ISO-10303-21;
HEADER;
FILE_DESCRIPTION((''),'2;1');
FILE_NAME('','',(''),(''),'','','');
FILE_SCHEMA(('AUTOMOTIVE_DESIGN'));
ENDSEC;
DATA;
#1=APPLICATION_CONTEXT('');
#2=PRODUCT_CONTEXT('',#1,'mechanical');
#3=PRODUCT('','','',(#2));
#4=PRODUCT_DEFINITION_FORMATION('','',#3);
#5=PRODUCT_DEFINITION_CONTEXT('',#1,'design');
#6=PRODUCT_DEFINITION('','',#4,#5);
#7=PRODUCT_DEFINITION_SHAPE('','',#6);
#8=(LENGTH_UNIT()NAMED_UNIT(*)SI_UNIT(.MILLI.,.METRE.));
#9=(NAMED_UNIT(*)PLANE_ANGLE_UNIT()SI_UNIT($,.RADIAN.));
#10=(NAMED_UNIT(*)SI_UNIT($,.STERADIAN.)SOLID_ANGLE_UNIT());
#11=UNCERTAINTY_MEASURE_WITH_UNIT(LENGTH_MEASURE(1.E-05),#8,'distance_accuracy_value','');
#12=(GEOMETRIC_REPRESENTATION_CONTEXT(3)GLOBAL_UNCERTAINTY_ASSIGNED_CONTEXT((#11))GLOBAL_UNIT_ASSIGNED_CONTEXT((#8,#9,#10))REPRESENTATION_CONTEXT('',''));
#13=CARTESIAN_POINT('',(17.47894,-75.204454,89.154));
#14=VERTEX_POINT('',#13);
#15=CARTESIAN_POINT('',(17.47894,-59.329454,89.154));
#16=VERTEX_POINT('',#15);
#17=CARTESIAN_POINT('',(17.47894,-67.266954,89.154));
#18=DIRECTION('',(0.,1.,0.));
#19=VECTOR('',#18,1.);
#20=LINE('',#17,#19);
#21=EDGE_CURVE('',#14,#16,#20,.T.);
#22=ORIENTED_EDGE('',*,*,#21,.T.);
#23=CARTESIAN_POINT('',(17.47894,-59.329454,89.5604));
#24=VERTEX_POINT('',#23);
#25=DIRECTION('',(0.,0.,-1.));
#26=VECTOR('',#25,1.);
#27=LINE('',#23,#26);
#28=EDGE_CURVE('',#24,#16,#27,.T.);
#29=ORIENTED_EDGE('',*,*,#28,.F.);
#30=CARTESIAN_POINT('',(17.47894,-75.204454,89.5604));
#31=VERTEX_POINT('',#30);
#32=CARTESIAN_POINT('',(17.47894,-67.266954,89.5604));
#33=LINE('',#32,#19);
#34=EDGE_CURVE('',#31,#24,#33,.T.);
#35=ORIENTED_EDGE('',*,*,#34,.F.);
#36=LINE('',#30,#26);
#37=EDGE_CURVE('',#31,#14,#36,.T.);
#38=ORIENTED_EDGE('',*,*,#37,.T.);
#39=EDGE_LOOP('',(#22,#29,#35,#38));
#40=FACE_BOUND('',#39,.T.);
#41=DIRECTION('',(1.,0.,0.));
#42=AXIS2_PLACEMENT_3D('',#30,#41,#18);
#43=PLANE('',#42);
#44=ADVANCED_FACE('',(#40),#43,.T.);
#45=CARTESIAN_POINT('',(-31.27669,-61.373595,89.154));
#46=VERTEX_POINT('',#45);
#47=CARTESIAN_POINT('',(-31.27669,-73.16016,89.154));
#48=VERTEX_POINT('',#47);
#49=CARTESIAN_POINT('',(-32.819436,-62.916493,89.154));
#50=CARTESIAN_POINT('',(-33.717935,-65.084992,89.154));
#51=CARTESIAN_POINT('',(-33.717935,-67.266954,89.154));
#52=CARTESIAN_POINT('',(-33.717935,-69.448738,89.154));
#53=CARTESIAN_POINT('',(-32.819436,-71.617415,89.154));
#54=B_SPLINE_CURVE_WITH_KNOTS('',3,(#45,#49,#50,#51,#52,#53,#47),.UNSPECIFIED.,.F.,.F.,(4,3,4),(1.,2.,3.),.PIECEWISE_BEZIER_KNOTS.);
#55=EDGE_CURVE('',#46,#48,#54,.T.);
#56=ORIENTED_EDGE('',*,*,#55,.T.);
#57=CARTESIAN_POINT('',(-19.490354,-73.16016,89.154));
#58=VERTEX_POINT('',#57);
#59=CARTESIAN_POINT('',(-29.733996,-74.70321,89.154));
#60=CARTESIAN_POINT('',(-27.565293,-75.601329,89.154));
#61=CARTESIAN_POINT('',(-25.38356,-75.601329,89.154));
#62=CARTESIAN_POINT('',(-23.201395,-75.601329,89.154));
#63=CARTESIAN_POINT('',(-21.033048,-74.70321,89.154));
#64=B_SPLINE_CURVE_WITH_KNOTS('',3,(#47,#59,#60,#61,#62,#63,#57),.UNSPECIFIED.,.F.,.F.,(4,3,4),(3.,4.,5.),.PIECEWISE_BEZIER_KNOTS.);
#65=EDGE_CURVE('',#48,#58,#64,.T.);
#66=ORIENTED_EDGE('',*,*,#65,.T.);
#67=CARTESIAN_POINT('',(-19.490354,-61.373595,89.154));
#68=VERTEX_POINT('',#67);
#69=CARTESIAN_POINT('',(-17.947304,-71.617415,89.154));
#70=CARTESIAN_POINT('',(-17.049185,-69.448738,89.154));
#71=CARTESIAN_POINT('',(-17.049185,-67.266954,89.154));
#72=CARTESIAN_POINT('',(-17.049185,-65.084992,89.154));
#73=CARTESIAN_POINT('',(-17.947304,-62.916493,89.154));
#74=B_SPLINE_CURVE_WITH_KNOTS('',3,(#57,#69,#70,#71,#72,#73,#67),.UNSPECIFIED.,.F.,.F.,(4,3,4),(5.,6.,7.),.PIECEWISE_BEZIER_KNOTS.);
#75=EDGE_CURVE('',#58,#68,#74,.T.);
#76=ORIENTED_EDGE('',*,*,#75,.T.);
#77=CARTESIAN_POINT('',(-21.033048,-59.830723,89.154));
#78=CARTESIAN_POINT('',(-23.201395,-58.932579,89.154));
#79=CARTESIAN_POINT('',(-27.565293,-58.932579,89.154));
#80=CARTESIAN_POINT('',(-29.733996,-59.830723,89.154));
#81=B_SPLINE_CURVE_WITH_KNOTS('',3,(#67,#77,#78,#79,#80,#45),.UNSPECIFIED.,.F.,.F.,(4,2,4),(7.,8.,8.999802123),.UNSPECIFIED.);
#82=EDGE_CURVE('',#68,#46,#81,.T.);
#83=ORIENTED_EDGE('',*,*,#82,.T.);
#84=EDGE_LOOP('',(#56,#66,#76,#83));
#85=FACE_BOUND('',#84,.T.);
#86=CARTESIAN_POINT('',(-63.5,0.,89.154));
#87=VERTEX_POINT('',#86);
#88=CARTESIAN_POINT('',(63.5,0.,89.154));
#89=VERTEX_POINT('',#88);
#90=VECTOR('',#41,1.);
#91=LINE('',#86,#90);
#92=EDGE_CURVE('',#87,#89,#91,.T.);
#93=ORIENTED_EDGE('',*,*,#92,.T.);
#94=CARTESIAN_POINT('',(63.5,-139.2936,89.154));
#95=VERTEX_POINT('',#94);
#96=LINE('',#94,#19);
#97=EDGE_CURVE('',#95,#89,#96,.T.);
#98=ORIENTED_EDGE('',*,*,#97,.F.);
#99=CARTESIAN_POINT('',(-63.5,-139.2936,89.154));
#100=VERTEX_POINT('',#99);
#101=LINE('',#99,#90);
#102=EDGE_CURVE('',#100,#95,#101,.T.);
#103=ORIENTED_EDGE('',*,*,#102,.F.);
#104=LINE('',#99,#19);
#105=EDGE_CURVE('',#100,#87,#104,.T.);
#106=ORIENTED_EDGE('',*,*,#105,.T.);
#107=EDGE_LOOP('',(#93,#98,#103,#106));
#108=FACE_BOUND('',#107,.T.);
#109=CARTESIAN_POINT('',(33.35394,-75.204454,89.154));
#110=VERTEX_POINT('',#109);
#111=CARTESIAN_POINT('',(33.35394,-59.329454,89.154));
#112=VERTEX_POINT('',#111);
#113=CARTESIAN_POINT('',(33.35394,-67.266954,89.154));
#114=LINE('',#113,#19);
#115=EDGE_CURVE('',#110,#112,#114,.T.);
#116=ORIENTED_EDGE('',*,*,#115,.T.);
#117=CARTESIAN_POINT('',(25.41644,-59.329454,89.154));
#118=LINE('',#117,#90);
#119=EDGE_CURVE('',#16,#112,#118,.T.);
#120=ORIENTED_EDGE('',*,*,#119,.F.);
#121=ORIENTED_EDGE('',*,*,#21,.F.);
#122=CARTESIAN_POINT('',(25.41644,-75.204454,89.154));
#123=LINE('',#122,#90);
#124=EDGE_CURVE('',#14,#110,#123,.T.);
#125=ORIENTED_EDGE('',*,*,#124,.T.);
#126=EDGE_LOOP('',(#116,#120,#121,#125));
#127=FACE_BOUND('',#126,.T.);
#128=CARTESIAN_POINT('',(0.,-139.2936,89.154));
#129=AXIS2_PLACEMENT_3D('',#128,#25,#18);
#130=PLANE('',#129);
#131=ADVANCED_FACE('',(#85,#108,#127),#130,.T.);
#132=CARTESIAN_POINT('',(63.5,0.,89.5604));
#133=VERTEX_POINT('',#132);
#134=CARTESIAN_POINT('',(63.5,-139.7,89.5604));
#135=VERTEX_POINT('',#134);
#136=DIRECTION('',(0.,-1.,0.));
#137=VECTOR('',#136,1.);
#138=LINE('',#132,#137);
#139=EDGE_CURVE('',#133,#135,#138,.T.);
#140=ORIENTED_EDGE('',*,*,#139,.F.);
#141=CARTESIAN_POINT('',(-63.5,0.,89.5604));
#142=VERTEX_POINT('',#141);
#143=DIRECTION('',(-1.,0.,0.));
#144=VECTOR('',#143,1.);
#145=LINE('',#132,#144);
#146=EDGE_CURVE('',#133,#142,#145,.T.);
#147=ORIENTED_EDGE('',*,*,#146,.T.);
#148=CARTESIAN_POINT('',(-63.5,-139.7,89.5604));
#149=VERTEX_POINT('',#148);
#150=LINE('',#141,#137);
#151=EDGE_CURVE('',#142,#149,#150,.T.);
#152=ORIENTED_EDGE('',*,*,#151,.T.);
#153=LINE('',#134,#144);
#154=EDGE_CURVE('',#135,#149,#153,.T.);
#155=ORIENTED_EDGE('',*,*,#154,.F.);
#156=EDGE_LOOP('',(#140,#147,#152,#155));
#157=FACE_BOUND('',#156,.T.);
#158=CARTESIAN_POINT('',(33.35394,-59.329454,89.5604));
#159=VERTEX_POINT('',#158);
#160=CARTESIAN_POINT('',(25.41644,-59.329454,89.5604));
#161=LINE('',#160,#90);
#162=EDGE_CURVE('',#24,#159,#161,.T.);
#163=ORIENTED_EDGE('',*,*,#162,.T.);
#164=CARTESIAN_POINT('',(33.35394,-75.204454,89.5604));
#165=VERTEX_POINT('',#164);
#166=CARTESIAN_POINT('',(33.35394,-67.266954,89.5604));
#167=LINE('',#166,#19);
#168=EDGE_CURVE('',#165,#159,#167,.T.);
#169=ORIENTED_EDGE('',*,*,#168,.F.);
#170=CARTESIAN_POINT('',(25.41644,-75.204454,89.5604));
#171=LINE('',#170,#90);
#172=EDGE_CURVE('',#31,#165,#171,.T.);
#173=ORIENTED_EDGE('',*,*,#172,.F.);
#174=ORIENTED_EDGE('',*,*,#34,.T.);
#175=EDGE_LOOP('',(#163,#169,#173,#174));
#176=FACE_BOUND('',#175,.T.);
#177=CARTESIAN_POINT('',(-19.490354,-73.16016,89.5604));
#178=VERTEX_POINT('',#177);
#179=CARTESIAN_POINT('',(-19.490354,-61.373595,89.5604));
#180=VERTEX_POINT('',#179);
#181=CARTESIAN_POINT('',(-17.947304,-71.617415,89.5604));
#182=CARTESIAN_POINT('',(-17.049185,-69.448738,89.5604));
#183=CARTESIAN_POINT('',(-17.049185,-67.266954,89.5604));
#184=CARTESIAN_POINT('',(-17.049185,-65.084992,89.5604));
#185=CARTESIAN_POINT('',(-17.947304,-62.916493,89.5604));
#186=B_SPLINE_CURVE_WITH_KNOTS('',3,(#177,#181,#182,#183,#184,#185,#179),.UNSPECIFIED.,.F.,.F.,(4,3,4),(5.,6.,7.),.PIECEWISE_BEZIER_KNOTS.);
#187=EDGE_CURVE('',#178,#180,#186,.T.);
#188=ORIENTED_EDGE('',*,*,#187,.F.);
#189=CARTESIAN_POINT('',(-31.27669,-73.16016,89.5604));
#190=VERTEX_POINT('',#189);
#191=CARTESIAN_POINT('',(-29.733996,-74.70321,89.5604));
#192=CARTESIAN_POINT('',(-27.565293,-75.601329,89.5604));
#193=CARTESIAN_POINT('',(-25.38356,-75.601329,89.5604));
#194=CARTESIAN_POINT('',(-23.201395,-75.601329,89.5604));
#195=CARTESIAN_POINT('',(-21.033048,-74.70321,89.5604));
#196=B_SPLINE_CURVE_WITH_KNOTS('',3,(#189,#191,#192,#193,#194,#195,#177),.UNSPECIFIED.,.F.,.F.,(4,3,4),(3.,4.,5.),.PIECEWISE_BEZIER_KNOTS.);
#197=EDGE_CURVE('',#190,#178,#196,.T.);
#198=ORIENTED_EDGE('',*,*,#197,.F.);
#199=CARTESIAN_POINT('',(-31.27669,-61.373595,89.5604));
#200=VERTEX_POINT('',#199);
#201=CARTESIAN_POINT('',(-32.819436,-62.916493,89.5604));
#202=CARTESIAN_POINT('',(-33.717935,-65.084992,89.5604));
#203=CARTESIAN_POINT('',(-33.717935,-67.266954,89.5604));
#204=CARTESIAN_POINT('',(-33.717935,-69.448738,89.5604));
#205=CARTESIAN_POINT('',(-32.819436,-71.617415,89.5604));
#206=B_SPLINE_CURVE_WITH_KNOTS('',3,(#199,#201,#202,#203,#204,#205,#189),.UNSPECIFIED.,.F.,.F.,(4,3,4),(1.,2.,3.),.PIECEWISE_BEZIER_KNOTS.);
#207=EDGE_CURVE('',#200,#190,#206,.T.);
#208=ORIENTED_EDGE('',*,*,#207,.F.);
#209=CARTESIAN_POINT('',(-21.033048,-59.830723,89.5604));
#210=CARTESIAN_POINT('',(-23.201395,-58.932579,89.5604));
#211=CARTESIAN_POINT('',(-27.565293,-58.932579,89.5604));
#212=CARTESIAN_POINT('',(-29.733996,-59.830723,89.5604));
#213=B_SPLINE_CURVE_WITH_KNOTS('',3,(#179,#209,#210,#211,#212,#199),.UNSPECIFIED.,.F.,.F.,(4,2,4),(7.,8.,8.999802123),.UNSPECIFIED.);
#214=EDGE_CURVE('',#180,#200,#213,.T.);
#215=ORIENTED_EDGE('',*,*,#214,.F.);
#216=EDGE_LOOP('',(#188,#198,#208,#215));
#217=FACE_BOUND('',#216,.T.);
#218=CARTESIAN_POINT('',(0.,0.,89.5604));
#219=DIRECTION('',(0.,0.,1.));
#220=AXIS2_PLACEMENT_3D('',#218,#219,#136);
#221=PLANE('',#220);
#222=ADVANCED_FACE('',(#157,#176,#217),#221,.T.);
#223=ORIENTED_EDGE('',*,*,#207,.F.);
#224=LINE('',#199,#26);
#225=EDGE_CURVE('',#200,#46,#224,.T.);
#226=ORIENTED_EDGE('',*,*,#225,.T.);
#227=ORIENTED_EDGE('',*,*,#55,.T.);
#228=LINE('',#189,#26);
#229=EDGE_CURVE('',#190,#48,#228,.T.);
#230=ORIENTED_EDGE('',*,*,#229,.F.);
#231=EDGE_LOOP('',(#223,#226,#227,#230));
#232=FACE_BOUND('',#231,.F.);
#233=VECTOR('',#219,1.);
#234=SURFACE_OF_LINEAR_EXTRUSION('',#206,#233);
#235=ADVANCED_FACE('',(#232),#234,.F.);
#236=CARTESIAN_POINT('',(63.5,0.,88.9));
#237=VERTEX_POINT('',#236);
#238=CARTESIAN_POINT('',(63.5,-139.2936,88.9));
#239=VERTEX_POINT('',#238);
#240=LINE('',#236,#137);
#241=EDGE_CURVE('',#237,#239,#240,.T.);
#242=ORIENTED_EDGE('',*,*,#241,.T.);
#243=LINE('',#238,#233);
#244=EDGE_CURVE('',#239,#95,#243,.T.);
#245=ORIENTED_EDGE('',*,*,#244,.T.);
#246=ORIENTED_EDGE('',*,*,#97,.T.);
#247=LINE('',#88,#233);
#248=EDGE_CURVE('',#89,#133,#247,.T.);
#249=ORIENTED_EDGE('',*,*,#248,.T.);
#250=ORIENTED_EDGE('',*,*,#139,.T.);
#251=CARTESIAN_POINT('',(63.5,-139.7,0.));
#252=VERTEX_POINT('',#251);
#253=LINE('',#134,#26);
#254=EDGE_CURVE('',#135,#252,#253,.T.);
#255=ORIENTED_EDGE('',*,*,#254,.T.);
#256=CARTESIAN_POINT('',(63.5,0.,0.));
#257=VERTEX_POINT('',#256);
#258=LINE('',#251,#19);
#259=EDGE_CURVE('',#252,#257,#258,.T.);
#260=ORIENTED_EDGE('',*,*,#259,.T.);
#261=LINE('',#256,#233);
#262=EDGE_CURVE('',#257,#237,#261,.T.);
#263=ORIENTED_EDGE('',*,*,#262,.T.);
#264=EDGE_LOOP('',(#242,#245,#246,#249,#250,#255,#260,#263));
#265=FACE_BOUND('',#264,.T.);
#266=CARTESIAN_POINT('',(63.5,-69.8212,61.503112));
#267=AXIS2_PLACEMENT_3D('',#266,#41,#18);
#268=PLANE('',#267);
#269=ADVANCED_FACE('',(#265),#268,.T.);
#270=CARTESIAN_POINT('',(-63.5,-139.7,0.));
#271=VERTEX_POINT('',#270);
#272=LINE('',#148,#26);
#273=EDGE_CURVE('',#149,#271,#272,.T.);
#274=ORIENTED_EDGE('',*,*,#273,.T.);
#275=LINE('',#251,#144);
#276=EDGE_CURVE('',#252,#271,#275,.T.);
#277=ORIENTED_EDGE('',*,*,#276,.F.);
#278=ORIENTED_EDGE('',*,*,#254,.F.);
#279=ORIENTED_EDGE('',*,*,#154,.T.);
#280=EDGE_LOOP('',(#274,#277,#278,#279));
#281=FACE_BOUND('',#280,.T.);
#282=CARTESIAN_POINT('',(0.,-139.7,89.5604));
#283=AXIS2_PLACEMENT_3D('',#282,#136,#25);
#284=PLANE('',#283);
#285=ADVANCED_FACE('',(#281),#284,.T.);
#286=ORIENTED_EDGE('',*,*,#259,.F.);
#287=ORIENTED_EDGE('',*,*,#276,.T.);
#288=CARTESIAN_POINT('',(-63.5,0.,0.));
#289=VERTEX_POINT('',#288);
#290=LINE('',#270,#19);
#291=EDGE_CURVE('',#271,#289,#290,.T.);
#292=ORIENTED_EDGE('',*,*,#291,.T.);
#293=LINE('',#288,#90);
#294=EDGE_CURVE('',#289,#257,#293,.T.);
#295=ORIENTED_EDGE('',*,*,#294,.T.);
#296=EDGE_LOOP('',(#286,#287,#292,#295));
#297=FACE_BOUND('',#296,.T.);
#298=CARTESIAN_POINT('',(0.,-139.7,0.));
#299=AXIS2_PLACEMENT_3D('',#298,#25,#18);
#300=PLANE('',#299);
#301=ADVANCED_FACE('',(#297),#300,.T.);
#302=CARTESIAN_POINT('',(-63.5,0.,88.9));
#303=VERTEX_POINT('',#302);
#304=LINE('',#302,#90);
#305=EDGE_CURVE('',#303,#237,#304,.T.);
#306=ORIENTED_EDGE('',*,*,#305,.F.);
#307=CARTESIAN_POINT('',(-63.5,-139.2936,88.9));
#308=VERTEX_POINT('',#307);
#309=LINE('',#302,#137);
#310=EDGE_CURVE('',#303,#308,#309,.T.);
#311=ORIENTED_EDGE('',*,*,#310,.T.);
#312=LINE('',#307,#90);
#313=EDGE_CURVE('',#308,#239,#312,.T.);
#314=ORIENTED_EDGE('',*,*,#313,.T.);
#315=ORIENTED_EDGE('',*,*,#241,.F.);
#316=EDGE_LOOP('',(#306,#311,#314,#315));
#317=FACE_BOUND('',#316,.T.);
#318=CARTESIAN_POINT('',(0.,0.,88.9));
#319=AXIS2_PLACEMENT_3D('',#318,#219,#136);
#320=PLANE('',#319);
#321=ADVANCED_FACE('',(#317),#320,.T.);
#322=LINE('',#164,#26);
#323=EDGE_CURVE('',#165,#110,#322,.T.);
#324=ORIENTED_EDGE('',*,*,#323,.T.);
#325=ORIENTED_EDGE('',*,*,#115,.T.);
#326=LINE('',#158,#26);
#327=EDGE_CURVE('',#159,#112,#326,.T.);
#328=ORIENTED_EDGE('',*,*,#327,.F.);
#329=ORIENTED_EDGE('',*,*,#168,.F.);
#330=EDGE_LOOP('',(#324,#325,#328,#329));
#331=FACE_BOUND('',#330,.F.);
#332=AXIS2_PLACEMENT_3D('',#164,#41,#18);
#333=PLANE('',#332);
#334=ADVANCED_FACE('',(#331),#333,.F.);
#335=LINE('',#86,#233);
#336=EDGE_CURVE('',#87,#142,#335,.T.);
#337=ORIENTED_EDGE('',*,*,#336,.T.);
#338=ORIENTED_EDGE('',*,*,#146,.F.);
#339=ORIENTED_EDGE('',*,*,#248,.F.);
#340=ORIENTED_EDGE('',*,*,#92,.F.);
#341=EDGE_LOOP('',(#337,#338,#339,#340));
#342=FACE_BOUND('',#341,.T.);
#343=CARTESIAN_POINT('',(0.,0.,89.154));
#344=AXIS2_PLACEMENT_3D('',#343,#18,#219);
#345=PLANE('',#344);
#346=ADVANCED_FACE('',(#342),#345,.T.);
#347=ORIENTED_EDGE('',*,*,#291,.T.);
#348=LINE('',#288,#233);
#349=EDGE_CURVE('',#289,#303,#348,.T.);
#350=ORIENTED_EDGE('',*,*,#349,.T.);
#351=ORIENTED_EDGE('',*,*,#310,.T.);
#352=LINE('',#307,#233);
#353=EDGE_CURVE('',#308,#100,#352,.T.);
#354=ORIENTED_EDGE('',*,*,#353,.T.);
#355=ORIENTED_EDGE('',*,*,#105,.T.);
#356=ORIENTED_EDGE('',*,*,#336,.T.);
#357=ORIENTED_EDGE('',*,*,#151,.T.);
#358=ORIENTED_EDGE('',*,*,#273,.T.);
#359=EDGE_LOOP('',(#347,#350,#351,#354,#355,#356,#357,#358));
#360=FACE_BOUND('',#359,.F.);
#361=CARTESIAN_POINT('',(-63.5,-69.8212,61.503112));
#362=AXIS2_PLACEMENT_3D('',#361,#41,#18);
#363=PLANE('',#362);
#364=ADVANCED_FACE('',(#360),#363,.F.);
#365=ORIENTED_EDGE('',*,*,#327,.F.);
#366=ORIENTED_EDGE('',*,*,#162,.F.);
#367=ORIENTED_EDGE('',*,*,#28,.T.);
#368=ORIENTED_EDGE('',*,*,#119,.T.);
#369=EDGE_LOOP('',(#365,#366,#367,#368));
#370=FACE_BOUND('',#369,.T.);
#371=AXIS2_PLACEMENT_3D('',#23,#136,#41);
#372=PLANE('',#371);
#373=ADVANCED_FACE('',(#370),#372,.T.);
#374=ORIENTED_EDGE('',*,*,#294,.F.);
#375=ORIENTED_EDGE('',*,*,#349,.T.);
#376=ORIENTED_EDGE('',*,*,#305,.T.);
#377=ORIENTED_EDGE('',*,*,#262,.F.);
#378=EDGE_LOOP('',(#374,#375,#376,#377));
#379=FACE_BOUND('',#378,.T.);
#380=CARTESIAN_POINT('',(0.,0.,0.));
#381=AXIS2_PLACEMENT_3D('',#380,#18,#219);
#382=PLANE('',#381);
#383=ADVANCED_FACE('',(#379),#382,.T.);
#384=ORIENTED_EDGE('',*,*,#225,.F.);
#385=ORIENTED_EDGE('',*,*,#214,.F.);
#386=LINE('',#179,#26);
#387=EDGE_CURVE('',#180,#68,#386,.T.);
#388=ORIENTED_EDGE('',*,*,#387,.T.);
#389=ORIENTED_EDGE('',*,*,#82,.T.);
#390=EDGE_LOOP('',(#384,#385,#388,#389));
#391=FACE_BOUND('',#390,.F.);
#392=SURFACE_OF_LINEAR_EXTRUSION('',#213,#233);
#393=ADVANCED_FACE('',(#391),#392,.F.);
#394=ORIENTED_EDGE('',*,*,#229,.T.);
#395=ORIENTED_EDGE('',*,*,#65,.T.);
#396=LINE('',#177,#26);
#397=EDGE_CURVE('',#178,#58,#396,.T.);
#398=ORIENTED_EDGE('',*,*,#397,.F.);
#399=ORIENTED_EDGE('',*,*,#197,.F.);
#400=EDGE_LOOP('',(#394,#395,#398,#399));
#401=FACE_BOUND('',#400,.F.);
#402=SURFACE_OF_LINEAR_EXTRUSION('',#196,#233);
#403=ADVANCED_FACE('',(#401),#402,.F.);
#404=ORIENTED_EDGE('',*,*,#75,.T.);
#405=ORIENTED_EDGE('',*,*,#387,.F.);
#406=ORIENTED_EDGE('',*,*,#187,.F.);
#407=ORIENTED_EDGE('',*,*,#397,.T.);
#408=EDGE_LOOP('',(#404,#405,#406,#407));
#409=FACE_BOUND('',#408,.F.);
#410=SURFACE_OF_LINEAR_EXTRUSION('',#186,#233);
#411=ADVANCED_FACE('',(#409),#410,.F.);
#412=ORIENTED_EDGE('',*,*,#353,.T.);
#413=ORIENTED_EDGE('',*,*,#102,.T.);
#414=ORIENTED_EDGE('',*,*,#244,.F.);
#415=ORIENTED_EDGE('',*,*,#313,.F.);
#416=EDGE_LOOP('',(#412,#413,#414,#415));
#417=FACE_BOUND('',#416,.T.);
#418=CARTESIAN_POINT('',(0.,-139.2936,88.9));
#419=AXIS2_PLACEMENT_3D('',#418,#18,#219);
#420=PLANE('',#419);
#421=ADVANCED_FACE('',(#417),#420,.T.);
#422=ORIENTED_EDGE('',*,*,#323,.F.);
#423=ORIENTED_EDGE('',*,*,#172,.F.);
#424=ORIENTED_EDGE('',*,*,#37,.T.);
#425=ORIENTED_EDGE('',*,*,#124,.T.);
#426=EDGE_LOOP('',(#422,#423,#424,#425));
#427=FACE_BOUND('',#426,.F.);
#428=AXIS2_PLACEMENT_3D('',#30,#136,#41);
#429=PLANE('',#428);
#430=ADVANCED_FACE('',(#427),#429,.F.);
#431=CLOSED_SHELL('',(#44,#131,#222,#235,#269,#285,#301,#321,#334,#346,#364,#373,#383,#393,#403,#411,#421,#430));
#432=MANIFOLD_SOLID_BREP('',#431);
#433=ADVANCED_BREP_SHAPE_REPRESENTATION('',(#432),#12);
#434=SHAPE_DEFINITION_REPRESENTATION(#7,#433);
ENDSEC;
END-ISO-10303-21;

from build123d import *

# Parameters (mm, degrees)
F1_DEPTH = 63.5
F2_W     = 15.875
F2_H     = 15.875
F3_DEPTH = 0.4064


# Not quite as in the source:
# - the dataset's text gives a spline's control points without its knots; the knots are read off the source's solid


with BuildPart() as f1:
    # F0 (on Right) → F1 (new body, symmetric)
    with BuildSketch(Plane.YZ):
        Polygon((-139.7, 0), (0, 0), (0, 88.9), (-139.2936, 88.9), (-139.2936, 89.154), (0, 89.154), (0, 89.5604), (-139.7, 89.5604), align=None)
    extrude(amount=F1_DEPTH, both=True)

    # F2 (on face) → F3 (cut, through all)
    with BuildSketch(Plane.XY.offset(89.5604)):
        with Locations((25.4164397061, -67.2669539907)):
            Rectangle(F2_W, F2_H)
        with BuildLine():
            add(Edge.make_bspline(
                [(-19.4903538939, -61.3735951907), (-21.0330482939, -59.8307229907), (-23.2013954939, -58.9325789907), (-25.3835602939, -58.9325789907)],
                knots=[7, 7, 7, 7, 8, 8, 8, 8], degree=3))
            add(Edge.make_bspline(
                [(-25.3835602939, -58.9325789907), (-27.5652932939, -58.9325789907), (-29.7339960939, -59.8307229907), (-31.2766904939, -61.3735951907)],
                knots=[0, 0, 0, 0, 1, 1, 1, 1], degree=3))
            add(Edge.make_bspline(
                [(-31.2766904939, -61.3735951907), (-32.8194356939, -62.9164927907), (-33.7179352939, -65.0849923907), (-33.7179352939, -67.2669539907), (-33.7179352939, -69.4487377907), (-32.8194356939, -71.6174151907), (-31.2766904939, -73.1601603907)],
                knots=[1, 1, 1, 1, 2, 2, 2, 3, 3, 3, 3], degree=3))
            add(Edge.make_bspline(
                [(-31.2766904939, -73.1601603907), (-29.7339960939, -74.7032103907), (-27.5652932939, -75.6013289907), (-25.3835602939, -75.6013289907), (-23.2013954939, -75.6013289907), (-21.0330482939, -74.7032103907), (-19.4903538939, -73.1601603907)],
                knots=[3, 3, 3, 3, 4, 4, 4, 5, 5, 5, 5], degree=3))
            add(Edge.make_bspline(
                [(-19.4903538939, -73.1601603907), (-17.9473038939, -71.6174151907), (-17.0491852939, -69.4487377907), (-17.0491852939, -67.2669539907), (-17.0491852939, -65.0849923907), (-17.9473038939, -62.9164927907), (-19.4903538939, -61.3735951907)],
                knots=[5, 5, 5, 5, 6, 6, 6, 7, 7, 7, 7], degree=3))
        make_face()
    extrude(amount=-F3_DEPTH, mode=Mode.SUBTRACT)


solid = f1.part
